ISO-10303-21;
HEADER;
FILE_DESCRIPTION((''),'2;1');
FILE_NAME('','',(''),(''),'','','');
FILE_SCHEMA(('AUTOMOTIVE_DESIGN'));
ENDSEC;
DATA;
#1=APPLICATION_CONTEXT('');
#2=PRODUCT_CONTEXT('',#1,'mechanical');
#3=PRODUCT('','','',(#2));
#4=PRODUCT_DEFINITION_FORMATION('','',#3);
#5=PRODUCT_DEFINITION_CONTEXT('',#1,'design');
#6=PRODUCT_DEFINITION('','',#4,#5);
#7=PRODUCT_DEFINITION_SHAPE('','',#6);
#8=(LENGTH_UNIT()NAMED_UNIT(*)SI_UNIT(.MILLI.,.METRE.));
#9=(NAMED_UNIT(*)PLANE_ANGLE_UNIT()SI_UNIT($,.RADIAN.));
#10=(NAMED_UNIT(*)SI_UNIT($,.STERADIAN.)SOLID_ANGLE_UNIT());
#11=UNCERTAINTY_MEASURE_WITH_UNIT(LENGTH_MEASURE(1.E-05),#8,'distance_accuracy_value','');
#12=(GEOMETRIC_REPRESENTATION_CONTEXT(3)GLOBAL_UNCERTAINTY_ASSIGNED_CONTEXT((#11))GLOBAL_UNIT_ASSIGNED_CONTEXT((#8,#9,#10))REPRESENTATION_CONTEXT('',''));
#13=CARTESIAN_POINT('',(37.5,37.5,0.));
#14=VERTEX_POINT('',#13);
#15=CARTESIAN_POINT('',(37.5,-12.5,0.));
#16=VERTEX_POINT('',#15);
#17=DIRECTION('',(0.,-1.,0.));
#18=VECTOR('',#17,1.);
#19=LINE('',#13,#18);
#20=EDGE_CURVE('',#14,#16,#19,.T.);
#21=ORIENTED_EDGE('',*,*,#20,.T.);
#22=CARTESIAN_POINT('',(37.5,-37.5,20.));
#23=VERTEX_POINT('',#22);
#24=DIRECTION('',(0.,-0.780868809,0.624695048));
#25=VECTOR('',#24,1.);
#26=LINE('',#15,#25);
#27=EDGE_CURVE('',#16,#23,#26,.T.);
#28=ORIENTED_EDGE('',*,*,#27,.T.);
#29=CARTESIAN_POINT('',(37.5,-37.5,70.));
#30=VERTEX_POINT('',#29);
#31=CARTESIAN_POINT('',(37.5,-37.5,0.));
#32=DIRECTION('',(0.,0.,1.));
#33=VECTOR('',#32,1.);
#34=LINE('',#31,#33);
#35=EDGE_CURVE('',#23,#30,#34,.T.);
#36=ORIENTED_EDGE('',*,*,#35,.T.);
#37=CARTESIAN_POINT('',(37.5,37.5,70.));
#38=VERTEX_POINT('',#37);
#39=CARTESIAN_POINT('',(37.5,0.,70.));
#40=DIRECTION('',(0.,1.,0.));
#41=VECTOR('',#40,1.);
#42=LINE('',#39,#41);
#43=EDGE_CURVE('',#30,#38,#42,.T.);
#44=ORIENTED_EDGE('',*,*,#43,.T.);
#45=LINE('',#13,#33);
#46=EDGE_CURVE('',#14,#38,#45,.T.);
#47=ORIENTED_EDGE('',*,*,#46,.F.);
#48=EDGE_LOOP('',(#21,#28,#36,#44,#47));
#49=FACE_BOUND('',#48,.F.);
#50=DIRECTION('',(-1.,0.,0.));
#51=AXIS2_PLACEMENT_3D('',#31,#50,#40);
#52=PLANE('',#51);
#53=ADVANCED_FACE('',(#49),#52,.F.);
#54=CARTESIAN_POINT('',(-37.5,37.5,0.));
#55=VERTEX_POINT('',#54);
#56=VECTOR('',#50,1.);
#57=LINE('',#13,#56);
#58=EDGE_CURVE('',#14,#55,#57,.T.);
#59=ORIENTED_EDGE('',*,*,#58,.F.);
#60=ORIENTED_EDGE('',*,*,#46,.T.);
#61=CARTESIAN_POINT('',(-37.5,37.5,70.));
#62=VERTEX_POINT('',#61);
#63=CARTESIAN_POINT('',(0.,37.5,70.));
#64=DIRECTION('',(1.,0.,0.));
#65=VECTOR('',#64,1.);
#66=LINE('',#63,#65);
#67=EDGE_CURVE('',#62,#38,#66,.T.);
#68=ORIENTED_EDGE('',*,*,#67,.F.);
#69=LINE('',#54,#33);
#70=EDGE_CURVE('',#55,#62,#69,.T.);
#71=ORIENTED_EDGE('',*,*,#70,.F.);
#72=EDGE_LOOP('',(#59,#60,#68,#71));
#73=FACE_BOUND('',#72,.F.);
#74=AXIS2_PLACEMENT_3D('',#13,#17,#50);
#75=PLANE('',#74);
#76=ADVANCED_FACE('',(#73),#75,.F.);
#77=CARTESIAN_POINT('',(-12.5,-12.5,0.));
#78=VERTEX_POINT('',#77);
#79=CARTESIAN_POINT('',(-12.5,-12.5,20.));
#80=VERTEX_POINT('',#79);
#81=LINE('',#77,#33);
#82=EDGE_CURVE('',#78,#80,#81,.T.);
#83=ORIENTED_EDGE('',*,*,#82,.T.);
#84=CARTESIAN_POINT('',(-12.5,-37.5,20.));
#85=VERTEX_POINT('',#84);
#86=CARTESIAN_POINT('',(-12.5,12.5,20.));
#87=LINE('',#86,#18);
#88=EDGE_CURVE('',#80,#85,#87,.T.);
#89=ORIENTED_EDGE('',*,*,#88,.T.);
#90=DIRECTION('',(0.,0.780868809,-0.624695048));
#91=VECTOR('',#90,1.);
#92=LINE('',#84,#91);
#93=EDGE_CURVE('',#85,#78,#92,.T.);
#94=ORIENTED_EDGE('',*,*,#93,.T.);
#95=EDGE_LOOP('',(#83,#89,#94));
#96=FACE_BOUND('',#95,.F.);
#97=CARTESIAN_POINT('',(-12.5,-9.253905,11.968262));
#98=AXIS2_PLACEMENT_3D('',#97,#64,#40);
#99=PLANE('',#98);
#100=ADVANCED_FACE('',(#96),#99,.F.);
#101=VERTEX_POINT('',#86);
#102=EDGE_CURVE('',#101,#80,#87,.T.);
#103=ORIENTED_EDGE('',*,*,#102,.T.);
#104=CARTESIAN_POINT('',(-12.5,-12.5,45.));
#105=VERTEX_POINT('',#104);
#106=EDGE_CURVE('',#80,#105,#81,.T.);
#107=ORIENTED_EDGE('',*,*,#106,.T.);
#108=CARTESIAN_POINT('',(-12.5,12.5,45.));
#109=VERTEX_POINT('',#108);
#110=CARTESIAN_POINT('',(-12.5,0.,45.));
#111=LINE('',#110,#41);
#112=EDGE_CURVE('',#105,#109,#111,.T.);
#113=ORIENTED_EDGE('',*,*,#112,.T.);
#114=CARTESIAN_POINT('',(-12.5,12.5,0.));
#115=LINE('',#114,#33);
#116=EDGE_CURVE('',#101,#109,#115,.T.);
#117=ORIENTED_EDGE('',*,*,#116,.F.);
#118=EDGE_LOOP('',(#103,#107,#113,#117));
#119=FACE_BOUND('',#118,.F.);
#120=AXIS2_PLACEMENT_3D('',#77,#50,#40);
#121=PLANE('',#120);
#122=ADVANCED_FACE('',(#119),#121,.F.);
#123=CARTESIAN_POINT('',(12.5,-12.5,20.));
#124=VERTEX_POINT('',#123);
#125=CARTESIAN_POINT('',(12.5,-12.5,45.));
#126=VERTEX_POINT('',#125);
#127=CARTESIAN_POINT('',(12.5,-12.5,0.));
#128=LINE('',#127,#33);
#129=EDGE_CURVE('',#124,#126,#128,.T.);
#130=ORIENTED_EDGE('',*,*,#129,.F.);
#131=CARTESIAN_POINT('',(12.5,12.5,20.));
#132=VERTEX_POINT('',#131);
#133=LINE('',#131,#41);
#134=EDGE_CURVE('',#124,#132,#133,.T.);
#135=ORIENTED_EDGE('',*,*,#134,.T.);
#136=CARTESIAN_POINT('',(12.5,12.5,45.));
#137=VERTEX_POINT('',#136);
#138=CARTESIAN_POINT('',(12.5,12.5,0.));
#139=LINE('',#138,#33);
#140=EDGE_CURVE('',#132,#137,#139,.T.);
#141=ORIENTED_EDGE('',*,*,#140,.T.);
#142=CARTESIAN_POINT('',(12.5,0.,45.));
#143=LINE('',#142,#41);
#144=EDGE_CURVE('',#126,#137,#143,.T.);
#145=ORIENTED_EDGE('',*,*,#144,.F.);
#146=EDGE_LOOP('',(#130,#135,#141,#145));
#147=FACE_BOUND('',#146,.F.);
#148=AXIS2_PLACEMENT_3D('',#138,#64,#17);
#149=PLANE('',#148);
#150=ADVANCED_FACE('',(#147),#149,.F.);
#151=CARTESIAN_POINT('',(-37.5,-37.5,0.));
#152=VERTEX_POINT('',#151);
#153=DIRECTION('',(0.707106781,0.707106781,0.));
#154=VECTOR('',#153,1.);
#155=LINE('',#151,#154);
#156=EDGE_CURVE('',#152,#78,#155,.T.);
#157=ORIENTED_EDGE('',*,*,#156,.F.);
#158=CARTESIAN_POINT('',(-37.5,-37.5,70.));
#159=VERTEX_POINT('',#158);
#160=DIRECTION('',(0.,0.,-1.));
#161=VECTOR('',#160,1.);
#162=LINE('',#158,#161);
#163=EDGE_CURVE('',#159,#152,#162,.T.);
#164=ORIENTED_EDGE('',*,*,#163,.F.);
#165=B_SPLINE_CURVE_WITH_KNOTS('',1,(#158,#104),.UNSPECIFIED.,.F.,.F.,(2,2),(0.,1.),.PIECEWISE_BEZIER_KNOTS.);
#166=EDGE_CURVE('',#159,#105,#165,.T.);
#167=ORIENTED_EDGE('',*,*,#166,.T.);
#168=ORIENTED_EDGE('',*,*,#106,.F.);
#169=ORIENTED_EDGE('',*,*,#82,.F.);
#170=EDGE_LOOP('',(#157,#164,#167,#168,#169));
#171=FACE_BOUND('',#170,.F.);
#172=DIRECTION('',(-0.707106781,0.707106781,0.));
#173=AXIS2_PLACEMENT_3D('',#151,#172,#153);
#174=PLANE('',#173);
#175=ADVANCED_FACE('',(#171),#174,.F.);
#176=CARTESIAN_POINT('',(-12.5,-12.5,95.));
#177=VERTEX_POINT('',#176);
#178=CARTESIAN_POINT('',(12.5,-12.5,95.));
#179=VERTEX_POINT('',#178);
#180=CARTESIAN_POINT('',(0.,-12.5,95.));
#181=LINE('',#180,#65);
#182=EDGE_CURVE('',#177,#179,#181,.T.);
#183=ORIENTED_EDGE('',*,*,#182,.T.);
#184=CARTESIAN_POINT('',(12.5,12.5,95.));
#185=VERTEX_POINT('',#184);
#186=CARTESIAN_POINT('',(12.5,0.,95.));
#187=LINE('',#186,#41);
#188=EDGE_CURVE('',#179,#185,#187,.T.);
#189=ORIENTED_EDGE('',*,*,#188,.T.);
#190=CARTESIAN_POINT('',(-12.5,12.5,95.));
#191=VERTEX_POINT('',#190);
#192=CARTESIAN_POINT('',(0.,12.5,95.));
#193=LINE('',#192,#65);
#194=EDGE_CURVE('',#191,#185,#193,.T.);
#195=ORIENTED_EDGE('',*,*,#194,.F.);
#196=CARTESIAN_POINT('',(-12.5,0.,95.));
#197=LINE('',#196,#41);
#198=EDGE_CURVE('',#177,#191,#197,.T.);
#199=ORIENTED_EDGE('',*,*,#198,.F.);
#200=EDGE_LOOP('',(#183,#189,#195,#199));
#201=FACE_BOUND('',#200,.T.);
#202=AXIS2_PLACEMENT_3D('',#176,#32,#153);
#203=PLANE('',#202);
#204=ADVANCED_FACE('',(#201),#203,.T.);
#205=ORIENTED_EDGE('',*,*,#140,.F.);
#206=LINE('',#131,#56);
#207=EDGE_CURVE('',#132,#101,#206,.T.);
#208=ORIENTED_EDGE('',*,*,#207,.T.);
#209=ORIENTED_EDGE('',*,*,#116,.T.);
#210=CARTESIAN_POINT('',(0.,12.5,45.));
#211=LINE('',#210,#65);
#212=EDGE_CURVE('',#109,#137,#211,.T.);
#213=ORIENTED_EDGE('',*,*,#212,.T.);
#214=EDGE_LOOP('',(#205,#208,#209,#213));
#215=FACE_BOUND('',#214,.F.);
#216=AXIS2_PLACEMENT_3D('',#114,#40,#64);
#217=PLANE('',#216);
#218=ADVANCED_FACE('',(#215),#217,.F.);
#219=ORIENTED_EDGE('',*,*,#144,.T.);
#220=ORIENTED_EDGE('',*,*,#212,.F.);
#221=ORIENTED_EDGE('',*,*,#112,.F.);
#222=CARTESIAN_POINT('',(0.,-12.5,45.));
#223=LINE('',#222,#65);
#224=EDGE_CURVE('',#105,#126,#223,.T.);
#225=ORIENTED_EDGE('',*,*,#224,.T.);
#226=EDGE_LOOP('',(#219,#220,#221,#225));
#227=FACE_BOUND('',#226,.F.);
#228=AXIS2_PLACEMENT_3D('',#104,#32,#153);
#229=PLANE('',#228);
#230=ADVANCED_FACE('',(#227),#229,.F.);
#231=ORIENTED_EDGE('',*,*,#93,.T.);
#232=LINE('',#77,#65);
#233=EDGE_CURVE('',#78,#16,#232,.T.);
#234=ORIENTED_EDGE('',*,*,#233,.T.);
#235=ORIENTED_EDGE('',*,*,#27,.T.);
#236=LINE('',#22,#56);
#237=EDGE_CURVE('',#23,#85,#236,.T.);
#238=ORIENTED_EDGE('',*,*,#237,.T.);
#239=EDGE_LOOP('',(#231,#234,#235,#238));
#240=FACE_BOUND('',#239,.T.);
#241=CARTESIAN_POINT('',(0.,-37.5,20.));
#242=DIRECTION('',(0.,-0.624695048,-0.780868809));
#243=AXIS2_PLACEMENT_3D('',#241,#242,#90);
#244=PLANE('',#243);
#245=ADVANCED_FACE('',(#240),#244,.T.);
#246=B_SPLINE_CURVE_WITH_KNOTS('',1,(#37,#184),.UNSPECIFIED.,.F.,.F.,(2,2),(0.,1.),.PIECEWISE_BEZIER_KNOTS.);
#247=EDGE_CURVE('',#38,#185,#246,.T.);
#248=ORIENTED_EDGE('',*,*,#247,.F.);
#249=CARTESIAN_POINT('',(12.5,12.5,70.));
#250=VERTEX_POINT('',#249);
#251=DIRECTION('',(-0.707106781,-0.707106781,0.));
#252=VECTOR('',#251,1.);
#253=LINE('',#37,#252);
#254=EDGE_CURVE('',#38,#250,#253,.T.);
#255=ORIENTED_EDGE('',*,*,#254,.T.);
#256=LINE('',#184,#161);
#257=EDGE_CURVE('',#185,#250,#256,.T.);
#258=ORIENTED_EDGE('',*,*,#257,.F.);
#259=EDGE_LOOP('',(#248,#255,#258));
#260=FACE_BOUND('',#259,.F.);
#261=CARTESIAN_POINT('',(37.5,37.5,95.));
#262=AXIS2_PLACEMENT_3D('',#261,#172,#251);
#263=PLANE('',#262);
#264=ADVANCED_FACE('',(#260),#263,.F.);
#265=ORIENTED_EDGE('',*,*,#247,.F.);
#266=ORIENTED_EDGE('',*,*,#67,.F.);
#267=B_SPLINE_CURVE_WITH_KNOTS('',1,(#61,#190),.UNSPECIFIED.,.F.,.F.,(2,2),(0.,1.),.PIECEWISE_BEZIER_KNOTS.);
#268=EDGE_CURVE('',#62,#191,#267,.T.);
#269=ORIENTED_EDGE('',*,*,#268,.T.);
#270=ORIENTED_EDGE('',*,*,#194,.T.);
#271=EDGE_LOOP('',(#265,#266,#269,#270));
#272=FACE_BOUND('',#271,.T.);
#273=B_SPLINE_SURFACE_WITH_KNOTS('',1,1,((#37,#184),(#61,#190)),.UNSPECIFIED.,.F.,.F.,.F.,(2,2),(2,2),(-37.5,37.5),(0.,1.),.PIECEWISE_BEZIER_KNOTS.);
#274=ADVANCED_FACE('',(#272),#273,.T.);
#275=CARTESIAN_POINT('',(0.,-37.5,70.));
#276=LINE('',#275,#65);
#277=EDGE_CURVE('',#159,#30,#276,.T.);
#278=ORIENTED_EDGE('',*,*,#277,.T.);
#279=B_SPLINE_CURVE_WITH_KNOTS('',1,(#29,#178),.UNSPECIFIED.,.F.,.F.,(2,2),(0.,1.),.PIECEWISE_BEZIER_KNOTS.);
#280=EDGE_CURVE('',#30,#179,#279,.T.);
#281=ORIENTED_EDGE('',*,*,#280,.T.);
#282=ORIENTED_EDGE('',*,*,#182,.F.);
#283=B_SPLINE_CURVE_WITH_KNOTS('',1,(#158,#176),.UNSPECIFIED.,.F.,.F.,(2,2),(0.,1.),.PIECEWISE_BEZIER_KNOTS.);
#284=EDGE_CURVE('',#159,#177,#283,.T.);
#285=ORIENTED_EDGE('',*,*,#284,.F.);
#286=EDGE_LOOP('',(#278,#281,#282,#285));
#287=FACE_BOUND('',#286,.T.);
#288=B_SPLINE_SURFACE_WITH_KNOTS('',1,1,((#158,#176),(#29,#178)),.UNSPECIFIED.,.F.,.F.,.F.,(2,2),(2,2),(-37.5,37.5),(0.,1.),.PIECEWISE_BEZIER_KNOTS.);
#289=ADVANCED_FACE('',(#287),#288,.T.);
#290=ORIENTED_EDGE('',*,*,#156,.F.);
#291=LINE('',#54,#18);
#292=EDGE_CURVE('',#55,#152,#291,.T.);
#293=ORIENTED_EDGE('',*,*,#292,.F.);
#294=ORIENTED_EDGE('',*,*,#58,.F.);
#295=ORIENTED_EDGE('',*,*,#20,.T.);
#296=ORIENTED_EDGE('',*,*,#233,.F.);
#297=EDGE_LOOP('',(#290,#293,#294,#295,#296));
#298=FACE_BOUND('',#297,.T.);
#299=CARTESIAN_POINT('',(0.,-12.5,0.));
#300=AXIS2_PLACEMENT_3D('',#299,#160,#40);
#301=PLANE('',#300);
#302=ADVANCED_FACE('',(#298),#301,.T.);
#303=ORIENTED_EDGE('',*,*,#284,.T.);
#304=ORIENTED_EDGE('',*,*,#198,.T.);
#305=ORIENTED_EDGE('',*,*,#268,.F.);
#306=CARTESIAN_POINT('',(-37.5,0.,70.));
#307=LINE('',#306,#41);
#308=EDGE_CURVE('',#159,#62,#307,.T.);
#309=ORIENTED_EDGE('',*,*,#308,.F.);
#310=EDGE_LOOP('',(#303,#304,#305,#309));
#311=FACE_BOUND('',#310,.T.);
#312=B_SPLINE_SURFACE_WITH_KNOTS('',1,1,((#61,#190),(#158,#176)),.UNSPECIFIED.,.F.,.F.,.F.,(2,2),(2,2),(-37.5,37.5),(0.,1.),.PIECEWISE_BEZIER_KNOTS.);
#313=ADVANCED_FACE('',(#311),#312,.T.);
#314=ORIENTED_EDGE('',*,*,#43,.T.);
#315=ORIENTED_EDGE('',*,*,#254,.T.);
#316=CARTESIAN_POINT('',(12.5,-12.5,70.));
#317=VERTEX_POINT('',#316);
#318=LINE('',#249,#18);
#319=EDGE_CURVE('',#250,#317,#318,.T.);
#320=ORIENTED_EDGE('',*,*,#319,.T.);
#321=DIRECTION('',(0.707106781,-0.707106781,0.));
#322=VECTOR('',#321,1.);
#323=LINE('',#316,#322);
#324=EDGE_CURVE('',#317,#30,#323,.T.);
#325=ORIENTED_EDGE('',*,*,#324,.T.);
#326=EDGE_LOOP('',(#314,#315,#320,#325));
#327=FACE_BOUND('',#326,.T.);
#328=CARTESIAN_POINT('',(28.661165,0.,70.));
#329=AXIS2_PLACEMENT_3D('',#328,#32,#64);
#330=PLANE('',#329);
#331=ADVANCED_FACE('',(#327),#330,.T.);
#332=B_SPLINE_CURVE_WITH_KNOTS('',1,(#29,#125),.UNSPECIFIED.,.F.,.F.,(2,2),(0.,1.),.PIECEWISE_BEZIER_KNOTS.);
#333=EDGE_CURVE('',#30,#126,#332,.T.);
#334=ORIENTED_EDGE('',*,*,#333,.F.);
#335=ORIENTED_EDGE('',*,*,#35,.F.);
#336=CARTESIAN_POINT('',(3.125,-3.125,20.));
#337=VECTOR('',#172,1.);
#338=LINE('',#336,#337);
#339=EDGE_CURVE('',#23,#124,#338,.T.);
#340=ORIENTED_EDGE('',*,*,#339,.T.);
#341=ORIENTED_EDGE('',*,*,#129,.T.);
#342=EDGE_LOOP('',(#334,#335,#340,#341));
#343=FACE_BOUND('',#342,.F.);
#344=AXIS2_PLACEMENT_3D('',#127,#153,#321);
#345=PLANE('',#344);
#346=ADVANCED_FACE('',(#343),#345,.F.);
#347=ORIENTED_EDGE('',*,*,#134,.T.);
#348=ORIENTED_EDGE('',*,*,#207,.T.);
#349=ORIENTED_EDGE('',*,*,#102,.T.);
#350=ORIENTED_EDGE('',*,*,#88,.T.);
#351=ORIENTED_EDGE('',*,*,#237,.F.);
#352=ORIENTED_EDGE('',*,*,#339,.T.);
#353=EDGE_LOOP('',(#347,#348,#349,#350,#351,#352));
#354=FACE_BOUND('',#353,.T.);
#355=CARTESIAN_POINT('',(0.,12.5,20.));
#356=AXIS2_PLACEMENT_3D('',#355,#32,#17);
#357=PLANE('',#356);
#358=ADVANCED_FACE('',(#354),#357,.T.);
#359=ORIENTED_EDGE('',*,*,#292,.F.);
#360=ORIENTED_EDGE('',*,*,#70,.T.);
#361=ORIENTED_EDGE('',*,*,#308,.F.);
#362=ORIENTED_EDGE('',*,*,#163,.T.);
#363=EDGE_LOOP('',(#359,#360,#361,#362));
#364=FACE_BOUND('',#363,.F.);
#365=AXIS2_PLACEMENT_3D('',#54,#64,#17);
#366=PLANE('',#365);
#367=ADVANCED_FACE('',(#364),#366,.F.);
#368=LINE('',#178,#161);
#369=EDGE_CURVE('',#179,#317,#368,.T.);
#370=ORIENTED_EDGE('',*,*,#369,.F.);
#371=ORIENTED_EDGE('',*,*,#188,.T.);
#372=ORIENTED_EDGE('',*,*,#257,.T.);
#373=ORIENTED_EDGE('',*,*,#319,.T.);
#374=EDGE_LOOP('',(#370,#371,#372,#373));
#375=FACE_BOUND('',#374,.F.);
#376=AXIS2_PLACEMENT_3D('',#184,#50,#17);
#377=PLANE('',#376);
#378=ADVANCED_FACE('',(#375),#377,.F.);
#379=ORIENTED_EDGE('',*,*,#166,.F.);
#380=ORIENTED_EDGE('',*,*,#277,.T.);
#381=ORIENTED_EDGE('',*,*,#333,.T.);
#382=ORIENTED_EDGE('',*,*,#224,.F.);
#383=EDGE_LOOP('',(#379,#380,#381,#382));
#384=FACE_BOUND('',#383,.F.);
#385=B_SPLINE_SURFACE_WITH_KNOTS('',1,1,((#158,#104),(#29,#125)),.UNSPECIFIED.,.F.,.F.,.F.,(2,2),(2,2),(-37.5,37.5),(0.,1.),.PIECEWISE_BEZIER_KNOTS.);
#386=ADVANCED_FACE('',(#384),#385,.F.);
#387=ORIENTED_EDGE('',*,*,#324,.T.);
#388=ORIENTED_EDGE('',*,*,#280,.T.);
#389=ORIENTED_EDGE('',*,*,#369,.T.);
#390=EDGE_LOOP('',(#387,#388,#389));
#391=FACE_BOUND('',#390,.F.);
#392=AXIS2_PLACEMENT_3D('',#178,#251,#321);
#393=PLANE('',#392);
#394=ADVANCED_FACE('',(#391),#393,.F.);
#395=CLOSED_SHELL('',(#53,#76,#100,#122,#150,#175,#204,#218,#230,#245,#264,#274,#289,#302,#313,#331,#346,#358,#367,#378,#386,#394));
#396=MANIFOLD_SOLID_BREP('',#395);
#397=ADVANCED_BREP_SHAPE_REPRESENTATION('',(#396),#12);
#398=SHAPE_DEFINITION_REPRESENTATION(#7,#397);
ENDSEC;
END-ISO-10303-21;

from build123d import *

# Parameters (mm, degrees)
F5_W           = 75
F5_H           = 75
F4_W           = 25
F4_H           = 25
F7_W           = 25
F7_H           = 25
F10_DEPTH      = 70.0000001
F11_DEPTH      = 70.00000015
F12_DEPTH      = 70.00000015
F14_DEPTH      = 37.5
F14_DEPTH_BACK = 12.5
F16_REACH      = 107.0166212872
F18_DEPTH      = 25


with BuildPart() as f6:
    # F5 (on offset) → F6 section 0
    with BuildSketch(Plane.XY.offset(70)):
        Rectangle(F5_W, F5_H)
    # F4 (on offset) → F6 section 1
    with BuildSketch(Plane.XY.offset(95)):
        Rectangle(F4_W, F4_H)
    loft()

    # F5 (on offset) → F8 section 0
    with BuildSketch(Plane.XY.offset(70)):
        Rectangle(F5_W, F5_H)
    # F7 (on offset) → F8 section 1
    with BuildSketch(Plane.XY.offset(45)):
        Rectangle(F7_W, F7_H)
    loft()

    # F9 (on Top) → F10 (join, through all)
    with BuildSketch(Plane.XY):
        Polygon((37.5, 37.5), (-37.5, 37.5), (-12.5, 12.5), (12.5, 12.5), align=None)
    extrude(amount=F10_DEPTH)

    # F9 (on Top) → F11 (join, through all)
    with BuildSketch(Plane.XY):
        Polygon((-37.5, 37.5), (-37.5, -37.5), (-12.5, -12.5), (-12.5, 12.5), align=None)
    extrude(amount=F11_DEPTH)

    # F9 (on Top) → F12 (join, through all)
    with BuildSketch(Plane.XY):
        Polygon((12.5, -12.5), (37.5, -37.5), (37.5, 37.5), (12.5, 12.5), align=None)
    extrude(amount=F12_DEPTH)

    # F13 (on Right) → F14 (join, two sides)
    with BuildSketch(Plane.YZ) as f14_sk:
        Polygon((-37.5, 20), (-12.5, 0), (12.5, 0), (12.5, 20), align=None)
    extrude(amount=F14_DEPTH)
    extrude(f14_sk.sketch, amount=-F14_DEPTH_BACK)

    f16_end = f6.faces().sort_by_distance((-25.9057971014, -25.9057971014, 29.2028985507))[0]
    # F15 (on face) → F16 (cut, up to a face of the model that its end follows)
    with BuildSketch(Plane.YZ.offset(37.5)):
        Polygon((-37.5, 0), (-12.5, 0), (-37.5, 20), align=None)
    f16_long = extrude(amount=-F16_REACH, mode=Mode.PRIVATE)
    add(split(f16_long, bisect_by=f16_end, keep=Keep.TOP, mode=Mode.PRIVATE), mode=Mode.SUBTRACT)

    # F17 (on offset) → F18 (cut, through all)
    with BuildSketch(Plane.XY.offset(95)):
        Polygon((12.5, 12.5), (12.5, -12.5), (37.5, -37.5), (37.5, -12.5), (37.5, 37.5), align=None)
    extrude(amount=-F18_DEPTH, mode=Mode.SUBTRACT)


solid = f6.part
